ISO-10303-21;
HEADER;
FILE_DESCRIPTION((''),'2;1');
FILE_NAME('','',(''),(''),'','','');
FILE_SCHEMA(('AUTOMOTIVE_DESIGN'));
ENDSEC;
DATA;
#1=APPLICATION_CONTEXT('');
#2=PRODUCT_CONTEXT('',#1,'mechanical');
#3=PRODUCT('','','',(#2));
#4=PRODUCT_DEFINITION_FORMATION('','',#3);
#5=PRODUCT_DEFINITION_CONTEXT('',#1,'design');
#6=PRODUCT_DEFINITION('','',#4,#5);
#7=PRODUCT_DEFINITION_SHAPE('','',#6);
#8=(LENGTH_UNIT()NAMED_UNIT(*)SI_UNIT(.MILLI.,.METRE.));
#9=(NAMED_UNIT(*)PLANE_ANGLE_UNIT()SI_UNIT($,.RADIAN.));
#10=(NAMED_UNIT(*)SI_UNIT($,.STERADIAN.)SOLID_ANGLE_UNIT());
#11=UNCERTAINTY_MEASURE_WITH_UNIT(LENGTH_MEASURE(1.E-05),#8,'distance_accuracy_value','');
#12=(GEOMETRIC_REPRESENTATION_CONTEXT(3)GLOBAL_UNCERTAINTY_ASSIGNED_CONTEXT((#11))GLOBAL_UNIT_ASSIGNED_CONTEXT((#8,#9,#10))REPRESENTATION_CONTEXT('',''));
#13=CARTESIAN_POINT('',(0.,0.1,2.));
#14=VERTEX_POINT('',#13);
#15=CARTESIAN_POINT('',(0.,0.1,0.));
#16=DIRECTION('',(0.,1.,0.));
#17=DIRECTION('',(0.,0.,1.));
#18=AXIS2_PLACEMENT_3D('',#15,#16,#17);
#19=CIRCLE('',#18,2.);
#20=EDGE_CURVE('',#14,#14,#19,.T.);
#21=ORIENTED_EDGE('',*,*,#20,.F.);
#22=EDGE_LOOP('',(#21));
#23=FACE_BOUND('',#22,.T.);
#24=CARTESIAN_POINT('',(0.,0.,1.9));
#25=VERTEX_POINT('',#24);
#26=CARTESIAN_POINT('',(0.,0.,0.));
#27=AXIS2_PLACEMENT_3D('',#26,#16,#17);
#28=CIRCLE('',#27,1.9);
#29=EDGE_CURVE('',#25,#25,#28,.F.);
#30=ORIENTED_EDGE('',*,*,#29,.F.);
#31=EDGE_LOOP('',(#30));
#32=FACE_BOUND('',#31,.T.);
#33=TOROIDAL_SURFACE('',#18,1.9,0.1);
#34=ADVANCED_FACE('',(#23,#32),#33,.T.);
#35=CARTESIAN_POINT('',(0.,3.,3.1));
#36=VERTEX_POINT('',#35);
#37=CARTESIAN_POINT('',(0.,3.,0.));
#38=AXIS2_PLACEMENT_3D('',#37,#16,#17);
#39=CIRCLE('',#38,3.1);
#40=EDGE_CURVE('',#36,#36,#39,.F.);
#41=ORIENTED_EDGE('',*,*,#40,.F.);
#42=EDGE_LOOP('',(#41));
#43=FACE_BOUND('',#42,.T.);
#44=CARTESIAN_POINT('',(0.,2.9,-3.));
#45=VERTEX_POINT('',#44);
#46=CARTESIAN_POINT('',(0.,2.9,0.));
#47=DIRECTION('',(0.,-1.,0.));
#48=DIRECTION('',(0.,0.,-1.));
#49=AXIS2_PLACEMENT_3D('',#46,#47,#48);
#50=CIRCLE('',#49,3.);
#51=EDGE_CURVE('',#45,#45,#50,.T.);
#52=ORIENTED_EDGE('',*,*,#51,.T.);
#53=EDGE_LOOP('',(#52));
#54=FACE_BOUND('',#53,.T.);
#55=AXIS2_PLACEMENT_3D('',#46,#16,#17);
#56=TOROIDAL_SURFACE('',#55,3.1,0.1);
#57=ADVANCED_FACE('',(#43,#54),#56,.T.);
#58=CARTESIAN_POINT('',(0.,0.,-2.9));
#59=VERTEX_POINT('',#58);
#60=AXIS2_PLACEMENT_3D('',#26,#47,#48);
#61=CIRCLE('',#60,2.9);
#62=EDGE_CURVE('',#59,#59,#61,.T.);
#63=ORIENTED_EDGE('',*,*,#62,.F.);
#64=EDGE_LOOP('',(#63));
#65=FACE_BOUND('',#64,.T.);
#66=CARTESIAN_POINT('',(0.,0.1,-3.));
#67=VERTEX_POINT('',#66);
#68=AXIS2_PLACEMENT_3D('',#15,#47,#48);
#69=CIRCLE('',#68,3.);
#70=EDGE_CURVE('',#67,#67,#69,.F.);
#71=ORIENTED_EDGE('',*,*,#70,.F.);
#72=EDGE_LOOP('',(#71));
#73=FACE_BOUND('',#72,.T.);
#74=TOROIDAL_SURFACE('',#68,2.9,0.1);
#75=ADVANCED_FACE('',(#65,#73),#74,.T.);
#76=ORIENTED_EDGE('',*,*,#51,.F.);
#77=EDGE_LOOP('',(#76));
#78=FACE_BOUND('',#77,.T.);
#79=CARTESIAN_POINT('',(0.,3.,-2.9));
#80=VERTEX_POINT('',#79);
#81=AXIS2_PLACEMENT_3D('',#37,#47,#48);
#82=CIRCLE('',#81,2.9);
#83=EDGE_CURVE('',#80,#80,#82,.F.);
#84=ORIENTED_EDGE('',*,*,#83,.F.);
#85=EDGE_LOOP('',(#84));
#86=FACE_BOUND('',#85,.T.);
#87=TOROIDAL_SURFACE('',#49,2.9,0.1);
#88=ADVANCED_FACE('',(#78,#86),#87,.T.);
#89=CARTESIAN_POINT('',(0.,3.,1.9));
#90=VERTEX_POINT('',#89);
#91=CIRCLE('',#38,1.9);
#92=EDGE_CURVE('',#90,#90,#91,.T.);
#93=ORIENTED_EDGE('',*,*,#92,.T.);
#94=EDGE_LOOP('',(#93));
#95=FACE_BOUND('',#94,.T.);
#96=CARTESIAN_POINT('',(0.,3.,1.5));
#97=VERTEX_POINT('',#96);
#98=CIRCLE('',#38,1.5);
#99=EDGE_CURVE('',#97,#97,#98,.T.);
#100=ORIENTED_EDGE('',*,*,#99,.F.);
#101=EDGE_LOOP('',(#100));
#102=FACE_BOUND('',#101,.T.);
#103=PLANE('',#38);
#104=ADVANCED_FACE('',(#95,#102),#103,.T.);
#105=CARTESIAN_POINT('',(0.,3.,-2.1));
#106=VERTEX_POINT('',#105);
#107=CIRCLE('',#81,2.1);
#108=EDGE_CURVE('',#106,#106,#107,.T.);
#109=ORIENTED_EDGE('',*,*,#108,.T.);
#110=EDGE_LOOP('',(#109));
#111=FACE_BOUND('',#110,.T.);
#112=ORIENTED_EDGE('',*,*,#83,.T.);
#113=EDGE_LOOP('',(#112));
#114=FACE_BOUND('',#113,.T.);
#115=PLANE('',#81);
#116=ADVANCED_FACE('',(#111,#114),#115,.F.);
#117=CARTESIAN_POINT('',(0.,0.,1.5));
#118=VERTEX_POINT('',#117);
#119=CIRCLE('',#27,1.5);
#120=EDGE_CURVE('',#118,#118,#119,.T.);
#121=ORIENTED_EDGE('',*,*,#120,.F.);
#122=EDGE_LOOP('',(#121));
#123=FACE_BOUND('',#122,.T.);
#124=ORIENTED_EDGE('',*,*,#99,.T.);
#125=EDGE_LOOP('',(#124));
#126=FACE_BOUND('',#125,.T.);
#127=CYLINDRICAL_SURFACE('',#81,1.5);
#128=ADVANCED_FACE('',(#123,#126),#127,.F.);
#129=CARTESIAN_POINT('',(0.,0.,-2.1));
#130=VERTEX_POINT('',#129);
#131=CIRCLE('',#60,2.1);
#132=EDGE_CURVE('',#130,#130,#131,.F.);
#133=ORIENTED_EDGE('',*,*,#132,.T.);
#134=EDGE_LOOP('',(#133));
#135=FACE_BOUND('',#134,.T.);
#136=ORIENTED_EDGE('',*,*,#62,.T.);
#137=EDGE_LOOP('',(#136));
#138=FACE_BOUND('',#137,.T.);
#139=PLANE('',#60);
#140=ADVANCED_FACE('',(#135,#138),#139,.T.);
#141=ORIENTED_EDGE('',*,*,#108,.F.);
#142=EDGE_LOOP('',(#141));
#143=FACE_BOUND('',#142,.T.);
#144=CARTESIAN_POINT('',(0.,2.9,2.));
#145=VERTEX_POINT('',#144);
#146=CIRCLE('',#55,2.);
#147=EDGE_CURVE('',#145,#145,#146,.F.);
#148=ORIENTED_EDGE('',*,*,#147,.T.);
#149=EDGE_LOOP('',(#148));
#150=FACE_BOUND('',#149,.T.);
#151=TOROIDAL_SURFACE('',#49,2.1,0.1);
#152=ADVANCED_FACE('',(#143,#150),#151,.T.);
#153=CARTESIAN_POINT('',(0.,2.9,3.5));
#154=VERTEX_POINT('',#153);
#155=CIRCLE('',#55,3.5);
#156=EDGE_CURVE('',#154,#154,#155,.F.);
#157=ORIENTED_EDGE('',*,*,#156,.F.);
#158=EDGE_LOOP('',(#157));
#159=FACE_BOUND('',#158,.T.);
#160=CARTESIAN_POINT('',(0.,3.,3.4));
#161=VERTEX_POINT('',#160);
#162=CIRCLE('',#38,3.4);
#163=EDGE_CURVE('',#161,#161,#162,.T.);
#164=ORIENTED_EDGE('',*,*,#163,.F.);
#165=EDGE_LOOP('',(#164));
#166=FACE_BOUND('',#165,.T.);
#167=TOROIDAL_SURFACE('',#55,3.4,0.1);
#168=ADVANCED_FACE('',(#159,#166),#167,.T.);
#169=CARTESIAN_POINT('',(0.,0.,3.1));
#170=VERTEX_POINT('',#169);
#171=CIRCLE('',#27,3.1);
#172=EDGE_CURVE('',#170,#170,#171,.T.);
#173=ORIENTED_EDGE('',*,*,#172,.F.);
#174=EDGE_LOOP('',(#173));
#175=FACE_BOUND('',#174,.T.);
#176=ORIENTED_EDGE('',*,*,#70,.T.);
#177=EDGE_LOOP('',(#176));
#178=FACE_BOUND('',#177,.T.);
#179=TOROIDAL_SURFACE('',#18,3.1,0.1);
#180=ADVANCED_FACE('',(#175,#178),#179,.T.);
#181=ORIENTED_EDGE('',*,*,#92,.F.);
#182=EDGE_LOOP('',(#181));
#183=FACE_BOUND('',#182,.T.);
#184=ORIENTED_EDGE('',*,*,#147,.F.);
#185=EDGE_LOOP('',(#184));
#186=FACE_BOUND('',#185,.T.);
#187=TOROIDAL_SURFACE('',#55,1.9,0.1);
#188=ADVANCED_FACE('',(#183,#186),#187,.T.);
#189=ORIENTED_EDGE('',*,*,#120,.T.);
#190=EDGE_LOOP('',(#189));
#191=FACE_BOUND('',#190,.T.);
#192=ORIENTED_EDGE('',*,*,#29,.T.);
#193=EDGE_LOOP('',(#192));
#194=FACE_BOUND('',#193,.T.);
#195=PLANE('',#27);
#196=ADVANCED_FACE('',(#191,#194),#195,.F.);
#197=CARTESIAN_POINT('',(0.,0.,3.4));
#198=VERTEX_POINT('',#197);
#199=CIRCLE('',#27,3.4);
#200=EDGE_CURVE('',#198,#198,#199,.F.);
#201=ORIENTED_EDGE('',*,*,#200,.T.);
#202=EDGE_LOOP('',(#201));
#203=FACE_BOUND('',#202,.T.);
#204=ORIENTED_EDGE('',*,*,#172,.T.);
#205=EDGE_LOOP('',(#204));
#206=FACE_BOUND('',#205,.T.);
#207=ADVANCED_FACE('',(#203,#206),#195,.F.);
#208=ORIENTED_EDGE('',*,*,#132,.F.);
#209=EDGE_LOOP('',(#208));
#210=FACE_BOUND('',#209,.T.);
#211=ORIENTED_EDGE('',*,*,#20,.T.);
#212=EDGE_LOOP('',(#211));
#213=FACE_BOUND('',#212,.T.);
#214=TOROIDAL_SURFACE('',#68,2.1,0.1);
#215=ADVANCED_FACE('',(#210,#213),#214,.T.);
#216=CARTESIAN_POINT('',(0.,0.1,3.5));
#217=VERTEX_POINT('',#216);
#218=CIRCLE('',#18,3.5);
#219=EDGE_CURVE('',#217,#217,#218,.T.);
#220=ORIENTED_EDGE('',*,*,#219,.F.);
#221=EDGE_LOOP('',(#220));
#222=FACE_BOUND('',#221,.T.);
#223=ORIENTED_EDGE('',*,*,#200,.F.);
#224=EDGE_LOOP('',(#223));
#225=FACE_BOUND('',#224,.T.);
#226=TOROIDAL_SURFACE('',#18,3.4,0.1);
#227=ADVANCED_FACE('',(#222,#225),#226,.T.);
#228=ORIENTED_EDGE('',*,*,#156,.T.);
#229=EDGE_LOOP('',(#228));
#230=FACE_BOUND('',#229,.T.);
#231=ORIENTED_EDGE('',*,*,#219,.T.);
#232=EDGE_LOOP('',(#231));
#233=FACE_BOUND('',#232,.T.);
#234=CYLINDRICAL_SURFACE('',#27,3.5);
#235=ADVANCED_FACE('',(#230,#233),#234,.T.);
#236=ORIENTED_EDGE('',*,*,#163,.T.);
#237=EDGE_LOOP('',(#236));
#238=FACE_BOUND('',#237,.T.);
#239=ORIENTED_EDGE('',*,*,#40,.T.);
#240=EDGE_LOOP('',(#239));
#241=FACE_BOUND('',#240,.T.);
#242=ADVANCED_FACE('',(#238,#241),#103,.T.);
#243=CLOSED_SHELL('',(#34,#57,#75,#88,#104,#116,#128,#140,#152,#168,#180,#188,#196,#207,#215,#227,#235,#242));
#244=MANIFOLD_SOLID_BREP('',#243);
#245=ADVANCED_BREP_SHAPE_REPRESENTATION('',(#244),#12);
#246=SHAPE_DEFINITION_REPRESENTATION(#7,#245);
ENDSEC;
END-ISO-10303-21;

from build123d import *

# Parameters (mm, degrees)
SKETCH1_R           = 2
SKETCH1_R_2         = 1.5
BOSS_EXTRUDE1_DEPTH = 3
FILLET1_R           = 0.1
SKETCH2_R           = 3
SKETCH2_R_2         = 2
BOSS_EXTRUDE2_DEPTH = 3
FILLET2_R           = 0.1
FILLET3_R           = 0.1
BOSS_EXTRUDE3_START = -3
SKETCH3_R           = 3.5
SKETCH3_R_2         = 3
BOSS_EXTRUDE3_DEPTH = 3
FILLET4_R           = 0.1


# Some blends are built 0.0001 mm under size
with BuildPart() as part:
    # Sketch1 → Boss-Extrude1 (new body)
    with BuildSketch(Plane(origin=(0, 0, 0), x_dir=(1, 0, 0), z_dir=(0, 1, 0))):
        with Locations(Location((0, 0, 0), (0, 0, 270))):
            Circle(SKETCH1_R)
        with Locations(Location((0, 0, 0), (0, 0, 270))):
            Circle(SKETCH1_R_2, mode=Mode.SUBTRACT)
    extrude(amount=BOSS_EXTRUDE1_DEPTH)

    # Fillet1
    fillet1_edges = [part.edges().sort_by_distance(p)[0] for p in [
        (0, 0, -2),
        (0, 3, -2),
    ]]
    fillet(fillet1_edges, radius=FILLET1_R)

    # Sketch2 → Boss-Extrude2 (add)
    with BuildSketch(Plane.XZ):
        with Locations(Location((0, 0, 0), (0, 0, 270))):
            Circle(SKETCH2_R)
        with Locations(Location((0, 0, 0), (0, 0, 270))):
            Circle(SKETCH2_R_2, mode=Mode.SUBTRACT)
    extrude(amount=-BOSS_EXTRUDE2_DEPTH)

    # Fillet2
    fillet2_edges = [part.edges().sort_by_distance(p)[0] for p in [
        (0, 0, 2),
        (0, 0, 3),
    ]]
    fillet(fillet2_edges, radius=FILLET2_R - 0.0001)  # a hair under: the kernel refuses the full size

    # Fillet3
    fillet3_edges = [part.edges().sort_by_distance(p)[0] for p in [
        (0, 3, 3),
        (0, 3, 2),
    ]]
    fillet(fillet3_edges, radius=FILLET3_R - 0.0001)  # a hair under: the kernel refuses the full size

    # Sketch3 → Boss-Extrude3 (add)
    with BuildSketch(Plane(origin=(0, 3, 0), x_dir=(1, 0, 0), z_dir=(0, 1, 0)).offset(BOSS_EXTRUDE3_START)):
        with Locations(Location((0, 0, 0), (0, 0, 270))):
            Circle(SKETCH3_R)
        with Locations(Location((0, 0, 0), (0, 0, 270))):
            Circle(SKETCH3_R_2, mode=Mode.SUBTRACT)
    extrude(amount=BOSS_EXTRUDE3_DEPTH)

    # Fillet4
    # the kernel refuses this fillet: 0.1 mm, written as the material it takes off along each edge
    with BuildSketch(Plane(origin=(0, 3, 0), x_dir=(0, 0, 1), z_dir=(-1, 0, 0))) as fillet4_piece_1:
        with BuildLine():
            CenterArc((3.09999995, -0.1), FILLET4_R, 90, 89.942704211)
            Line((3.09999995, 0), (3, 0))
            Line((3, 0), (3, -0.0999))
        make_face()
    revolve(axis=Axis((0, 3, 0), (0, 1, 0)), revolution_arc=179.999997988, mode=Mode.SUBTRACT)
    with BuildSketch(Plane(origin=(0, 3, 0), x_dir=(3.511003429742081e-08, 0, -0.9999999999999994), z_dir=(0.9999999999999994, 0, 3.511003429742081e-08))) as fillet4_piece_2:
        with BuildLine():
            CenterArc((3.09999995, -0.1), FILLET4_R, 90, 89.942704211)
            Line((3.09999995, 0), (3, 0))
            Line((3, 0), (3, -0.0999))
        make_face()
    revolve(axis=Axis((0, 3, 0), (0, 1, 0)), revolution_arc=180.000002012, mode=Mode.SUBTRACT)
    with BuildSketch(Plane(origin=(0, 0, 0), x_dir=(0, 0, 1), z_dir=(-1, 0, 0))) as fillet4_piece_3:
        with BuildLine():
            CenterArc((3.5 - FILLET4_R, FILLET4_R), FILLET4_R, 270, 90)
            Line((3.5 - FILLET4_R, 0), (3.5, 0))
            Line((3.5, 0), (3.5, FILLET4_R))
        make_face()
    revolve(axis=Axis((0, 0, 0), (0, 1, 0)), mode=Mode.SUBTRACT)
    with BuildSketch(Plane(origin=(0, 0, 0), x_dir=(0, 0, 1), z_dir=(-1, 0, 0))) as fillet4_piece_4:
        with BuildLine():
            CenterArc((3.09999995, 0.1), FILLET4_R, 180.057295789, 89.942704211)
            Line((3, 0.0999), (3, 0))
            Line((3, 0), (3.09999995, 0))
        make_face()
    revolve(axis=Axis((0, 0, 0), (0, 1, 0)), revolution_arc=179.999997988, mode=Mode.SUBTRACT)
    with BuildSketch(Plane(origin=(0, 0, 0), x_dir=(3.511003429742081e-08, 0, -0.9999999999999994), z_dir=(0.9999999999999994, 0, 3.511003429742081e-08))) as fillet4_piece_5:
        with BuildLine():
            CenterArc((3.09999995, 0.1), FILLET4_R, 180.057295789, 89.942704211)
            Line((3, 0.0999), (3, 0))
            Line((3, 0), (3.09999995, 0))
        make_face()
    revolve(axis=Axis((0, 0, 0), (0, 1, 0)), revolution_arc=180.000002012, mode=Mode.SUBTRACT)
    with BuildSketch(Plane(origin=(0, 3, 0), x_dir=(0, 0, 1), z_dir=(-1, 0, 0))) as fillet4_piece_6:
        with BuildLine():
            CenterArc((3.5 - FILLET4_R, -FILLET4_R), FILLET4_R, 0, 90)
            Line((3.5, -FILLET4_R), (3.5, 0))
            Line((3.5, 0), (3.5 - FILLET4_R, 0))
        make_face()
    revolve(axis=Axis((0, 3, 0), (0, 1, 0)), mode=Mode.SUBTRACT)


solid = part.part
